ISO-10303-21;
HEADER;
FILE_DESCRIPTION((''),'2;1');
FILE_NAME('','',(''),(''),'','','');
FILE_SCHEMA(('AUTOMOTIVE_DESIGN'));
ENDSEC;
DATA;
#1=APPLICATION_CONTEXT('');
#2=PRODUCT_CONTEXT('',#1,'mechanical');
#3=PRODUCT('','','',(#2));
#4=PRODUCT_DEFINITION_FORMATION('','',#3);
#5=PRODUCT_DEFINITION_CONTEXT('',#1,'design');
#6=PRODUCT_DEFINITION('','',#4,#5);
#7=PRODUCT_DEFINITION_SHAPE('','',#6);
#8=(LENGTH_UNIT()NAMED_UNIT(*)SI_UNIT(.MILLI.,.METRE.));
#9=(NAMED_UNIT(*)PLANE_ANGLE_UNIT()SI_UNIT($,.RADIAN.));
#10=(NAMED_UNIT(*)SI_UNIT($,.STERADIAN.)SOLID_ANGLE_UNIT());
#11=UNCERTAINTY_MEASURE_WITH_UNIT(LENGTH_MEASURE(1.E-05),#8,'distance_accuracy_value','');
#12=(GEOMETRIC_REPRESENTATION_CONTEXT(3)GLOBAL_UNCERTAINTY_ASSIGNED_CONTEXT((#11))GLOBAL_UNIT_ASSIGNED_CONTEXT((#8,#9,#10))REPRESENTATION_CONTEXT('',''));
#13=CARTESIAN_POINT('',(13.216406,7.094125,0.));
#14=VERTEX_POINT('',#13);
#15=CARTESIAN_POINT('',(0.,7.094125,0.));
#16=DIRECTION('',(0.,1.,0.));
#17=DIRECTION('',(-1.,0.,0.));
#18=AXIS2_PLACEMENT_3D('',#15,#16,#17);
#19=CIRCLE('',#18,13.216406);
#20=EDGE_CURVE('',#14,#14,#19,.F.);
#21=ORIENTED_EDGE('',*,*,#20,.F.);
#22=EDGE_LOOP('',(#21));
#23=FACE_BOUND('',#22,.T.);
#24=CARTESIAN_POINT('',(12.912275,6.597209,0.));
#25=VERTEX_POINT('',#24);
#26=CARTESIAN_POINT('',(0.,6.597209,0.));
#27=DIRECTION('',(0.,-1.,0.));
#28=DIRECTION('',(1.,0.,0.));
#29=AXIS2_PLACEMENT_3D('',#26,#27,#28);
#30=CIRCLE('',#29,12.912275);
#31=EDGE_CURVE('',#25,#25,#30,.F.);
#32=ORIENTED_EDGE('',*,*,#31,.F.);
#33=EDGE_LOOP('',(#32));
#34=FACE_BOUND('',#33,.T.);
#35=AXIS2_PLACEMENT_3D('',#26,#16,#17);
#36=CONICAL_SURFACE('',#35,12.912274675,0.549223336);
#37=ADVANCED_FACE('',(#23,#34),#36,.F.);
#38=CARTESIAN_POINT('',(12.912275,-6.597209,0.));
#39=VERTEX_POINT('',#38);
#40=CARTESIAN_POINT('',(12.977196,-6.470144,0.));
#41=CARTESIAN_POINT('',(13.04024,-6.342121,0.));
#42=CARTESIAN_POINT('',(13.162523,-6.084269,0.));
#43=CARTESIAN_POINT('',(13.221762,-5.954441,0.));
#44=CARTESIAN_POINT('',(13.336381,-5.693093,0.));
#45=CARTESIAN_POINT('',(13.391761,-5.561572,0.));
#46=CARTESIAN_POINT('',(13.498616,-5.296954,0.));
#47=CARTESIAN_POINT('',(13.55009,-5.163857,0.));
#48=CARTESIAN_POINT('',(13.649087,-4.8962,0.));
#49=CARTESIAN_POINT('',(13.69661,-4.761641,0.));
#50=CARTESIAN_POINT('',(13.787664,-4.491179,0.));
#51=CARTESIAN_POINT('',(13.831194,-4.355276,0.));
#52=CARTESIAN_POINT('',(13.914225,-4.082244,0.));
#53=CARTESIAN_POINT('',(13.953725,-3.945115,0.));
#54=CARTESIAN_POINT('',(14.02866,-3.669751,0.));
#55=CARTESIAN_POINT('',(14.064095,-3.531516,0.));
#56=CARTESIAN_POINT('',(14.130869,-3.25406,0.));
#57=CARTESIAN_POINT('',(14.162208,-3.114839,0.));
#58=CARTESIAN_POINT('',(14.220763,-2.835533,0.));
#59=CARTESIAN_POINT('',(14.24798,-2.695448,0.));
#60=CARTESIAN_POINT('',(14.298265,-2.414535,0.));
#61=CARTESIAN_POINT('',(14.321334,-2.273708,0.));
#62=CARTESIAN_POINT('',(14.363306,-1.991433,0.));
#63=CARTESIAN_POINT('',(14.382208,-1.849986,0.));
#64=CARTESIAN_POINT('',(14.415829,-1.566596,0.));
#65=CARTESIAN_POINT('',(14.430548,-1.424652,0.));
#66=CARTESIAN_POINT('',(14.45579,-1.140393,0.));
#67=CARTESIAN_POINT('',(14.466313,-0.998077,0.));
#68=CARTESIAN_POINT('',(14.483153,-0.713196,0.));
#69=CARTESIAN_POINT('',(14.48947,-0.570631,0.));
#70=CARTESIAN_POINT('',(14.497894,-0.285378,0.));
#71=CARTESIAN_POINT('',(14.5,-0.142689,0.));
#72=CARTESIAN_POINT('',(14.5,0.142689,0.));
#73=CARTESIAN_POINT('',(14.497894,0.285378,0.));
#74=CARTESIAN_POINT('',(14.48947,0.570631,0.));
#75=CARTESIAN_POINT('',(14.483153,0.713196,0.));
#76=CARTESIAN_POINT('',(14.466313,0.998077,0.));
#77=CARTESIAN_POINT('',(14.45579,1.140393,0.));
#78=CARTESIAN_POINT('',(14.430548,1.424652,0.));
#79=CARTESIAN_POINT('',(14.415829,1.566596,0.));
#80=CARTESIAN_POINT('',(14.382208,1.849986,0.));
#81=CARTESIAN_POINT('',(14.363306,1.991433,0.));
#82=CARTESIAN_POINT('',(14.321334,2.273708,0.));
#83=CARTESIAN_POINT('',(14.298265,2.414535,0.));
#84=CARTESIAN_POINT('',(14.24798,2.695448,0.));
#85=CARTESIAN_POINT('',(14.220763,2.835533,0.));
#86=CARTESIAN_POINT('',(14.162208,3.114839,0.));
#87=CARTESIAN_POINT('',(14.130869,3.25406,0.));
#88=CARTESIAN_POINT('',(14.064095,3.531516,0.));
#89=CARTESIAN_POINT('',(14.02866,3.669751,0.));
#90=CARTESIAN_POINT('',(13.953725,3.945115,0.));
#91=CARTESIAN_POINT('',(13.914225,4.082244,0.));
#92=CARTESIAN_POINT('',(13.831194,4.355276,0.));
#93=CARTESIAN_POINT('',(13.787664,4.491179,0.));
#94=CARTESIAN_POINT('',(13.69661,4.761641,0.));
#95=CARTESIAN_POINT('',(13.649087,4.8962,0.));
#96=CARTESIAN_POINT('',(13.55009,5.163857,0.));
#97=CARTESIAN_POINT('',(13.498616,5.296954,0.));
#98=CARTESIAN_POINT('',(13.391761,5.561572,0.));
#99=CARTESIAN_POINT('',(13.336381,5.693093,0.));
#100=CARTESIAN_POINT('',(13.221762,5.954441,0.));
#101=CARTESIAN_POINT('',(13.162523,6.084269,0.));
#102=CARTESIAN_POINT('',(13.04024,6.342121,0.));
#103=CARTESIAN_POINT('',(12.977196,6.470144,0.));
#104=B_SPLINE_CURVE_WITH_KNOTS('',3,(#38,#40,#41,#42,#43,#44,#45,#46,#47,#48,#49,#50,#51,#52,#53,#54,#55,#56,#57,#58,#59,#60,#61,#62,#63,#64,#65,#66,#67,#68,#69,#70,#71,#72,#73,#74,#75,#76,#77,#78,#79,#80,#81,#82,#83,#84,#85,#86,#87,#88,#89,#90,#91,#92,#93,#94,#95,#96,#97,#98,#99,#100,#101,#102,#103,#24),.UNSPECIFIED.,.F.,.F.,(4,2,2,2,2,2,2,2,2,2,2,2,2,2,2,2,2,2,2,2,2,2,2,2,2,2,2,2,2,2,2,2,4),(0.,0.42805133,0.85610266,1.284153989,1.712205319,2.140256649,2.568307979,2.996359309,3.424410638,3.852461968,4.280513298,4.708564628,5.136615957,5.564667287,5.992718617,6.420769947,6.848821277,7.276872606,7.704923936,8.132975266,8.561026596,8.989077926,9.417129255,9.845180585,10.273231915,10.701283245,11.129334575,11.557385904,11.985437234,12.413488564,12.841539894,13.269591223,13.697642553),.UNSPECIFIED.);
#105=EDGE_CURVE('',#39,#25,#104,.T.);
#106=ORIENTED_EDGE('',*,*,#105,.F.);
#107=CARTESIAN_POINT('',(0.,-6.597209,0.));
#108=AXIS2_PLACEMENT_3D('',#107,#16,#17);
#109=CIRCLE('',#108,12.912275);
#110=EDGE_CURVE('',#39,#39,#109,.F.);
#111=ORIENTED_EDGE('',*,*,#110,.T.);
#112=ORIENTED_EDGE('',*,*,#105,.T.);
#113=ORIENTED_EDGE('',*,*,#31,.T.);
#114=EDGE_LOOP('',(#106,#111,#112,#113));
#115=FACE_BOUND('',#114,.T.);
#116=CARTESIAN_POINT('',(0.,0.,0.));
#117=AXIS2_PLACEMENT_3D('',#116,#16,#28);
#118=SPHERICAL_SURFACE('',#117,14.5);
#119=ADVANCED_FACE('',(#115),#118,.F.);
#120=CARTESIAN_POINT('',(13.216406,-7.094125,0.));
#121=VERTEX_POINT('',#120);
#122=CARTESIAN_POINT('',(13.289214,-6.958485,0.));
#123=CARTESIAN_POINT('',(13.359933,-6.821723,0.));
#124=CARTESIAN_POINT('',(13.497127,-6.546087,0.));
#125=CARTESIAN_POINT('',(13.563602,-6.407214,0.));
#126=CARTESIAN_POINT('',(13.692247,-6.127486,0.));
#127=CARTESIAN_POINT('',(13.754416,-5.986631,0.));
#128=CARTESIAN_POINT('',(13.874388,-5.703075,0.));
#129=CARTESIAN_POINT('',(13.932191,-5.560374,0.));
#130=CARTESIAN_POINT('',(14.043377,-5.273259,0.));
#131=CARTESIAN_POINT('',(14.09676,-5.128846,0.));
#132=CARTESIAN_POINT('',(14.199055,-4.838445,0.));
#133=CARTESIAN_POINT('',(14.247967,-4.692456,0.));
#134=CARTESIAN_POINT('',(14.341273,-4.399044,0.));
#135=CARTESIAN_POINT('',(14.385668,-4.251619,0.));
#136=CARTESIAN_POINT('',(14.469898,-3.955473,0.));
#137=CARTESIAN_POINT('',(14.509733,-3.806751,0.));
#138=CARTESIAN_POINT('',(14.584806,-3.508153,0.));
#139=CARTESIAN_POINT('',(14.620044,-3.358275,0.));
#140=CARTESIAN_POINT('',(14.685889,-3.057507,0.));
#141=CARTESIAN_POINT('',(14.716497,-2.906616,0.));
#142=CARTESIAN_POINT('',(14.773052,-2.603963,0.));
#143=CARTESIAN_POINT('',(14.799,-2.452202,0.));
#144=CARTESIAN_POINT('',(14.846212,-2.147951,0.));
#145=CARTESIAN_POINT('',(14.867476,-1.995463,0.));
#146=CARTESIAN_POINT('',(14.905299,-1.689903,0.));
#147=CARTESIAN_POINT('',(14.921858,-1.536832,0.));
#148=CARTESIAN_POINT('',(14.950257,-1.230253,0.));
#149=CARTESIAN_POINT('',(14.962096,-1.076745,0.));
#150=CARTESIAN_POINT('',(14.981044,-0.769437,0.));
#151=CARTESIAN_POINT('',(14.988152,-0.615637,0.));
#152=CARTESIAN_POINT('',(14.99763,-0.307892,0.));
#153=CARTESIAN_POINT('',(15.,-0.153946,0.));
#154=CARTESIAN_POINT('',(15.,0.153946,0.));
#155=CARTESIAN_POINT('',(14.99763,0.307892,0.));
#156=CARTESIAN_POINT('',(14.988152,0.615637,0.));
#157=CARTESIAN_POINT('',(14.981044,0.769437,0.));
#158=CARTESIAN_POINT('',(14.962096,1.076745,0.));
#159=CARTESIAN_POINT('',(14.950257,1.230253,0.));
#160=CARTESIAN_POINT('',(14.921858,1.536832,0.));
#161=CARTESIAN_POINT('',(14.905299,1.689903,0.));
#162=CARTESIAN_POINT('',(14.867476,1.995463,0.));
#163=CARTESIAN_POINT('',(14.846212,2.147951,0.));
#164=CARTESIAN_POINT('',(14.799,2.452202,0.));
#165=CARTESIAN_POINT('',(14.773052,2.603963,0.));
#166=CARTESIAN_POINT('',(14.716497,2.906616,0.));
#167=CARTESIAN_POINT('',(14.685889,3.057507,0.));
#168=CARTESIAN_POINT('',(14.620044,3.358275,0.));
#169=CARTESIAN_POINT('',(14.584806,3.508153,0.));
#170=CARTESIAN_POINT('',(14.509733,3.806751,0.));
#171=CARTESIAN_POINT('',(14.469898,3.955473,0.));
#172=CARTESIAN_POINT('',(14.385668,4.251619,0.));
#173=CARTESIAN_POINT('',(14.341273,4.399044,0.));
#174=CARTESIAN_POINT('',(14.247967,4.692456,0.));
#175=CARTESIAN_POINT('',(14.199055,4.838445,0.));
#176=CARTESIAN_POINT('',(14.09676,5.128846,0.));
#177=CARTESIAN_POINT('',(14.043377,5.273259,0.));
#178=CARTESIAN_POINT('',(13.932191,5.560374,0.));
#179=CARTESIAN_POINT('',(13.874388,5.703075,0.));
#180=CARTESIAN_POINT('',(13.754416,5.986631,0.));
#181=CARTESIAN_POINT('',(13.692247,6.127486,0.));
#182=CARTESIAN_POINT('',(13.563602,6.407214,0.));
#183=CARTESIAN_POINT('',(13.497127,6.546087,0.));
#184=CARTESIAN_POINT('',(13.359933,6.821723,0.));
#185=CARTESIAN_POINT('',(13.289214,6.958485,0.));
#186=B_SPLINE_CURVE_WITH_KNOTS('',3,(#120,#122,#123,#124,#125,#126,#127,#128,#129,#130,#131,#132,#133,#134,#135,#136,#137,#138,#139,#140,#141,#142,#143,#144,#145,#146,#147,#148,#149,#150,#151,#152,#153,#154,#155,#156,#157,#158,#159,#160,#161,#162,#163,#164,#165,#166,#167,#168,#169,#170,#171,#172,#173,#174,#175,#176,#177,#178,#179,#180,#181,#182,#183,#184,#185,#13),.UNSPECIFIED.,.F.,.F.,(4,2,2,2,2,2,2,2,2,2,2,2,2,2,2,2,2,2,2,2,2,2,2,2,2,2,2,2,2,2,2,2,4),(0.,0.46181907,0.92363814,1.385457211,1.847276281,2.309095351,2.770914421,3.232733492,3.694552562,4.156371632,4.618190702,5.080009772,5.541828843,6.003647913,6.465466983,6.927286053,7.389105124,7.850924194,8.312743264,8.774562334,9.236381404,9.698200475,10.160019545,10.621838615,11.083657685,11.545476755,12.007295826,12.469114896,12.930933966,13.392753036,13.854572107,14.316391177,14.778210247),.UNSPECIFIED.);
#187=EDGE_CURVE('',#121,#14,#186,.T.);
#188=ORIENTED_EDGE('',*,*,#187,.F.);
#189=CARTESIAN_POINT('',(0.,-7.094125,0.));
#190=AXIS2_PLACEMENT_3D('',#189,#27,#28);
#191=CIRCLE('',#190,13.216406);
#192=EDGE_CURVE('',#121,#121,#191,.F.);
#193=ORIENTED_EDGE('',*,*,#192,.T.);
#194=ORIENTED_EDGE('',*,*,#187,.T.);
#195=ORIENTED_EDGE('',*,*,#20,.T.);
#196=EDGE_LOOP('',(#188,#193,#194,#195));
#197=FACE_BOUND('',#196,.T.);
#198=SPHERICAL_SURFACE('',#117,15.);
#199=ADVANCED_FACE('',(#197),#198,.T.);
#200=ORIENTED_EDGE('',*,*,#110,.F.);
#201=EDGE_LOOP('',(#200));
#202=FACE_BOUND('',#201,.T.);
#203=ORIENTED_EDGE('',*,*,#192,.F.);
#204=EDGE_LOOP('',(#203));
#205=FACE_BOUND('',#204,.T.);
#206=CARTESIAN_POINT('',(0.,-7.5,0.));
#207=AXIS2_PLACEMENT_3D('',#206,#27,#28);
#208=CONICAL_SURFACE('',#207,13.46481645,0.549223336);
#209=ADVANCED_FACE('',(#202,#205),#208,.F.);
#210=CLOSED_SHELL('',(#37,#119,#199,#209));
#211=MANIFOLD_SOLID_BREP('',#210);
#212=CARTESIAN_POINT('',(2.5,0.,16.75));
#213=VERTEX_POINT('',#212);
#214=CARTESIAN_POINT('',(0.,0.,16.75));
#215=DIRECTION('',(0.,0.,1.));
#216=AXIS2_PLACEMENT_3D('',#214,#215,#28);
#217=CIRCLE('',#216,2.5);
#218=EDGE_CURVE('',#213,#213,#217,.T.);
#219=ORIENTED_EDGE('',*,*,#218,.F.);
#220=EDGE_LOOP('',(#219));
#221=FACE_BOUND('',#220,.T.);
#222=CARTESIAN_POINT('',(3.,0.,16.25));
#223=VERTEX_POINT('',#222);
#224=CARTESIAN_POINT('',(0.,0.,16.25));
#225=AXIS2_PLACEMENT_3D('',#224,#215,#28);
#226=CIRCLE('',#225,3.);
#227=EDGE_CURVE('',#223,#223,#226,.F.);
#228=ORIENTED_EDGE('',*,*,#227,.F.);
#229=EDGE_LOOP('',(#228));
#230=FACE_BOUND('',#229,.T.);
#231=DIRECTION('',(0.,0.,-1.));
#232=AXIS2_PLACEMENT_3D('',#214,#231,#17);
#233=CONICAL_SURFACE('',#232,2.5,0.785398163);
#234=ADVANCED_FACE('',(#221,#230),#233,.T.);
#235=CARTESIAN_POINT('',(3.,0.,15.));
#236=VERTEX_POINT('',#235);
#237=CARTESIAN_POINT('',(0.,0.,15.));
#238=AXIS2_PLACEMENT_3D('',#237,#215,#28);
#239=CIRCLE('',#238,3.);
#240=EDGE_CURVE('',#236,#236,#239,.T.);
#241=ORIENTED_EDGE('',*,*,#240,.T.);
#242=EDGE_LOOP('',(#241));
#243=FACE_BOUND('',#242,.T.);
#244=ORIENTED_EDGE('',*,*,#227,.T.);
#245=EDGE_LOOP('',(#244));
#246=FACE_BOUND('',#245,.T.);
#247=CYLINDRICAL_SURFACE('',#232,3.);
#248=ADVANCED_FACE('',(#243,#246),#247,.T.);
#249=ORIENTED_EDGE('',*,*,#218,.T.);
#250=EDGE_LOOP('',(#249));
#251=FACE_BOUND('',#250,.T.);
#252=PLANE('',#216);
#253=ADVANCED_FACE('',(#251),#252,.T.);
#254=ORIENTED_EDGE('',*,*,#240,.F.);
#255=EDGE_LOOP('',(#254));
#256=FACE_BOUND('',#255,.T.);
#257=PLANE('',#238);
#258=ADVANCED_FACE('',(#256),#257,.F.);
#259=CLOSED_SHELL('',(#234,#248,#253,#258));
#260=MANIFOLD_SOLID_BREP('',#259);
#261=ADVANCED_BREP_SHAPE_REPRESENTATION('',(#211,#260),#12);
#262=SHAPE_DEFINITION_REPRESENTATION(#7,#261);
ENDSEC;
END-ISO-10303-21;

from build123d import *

# Parameters (mm, degrees)
SHELL2_T            = -0.5
SKETCH4_R           = 3
BOSS_EXTRUDE1_DEPTH = 1.75
CHAMFER5_SIZE       = 0.5


with BuildPart() as part:
    # Sketch2 → Revolve1 (revolve)
    with BuildSketch(Plane.XY):
        with BuildLine():
            Line((12.990381057, 7.5), (0, 7.5))
            Line((0, 7.5), (0, -7.5))
            Line((0, -7.5), (12.990381057, -7.5))
            ThreePointArc((12.990381057, -7.5), (15, 0), (12.990381057, 7.5))
        make_face()
    revolve(axis=Axis((0, 7.5, 0), (0, -1, 0)))

    # Shell2
    shell2_openings = [part.faces().sort_by_distance(p)[0] for p in [
        (0, -7.5, 0),
        (0, 7.5, 0),
    ]]
    offset(amount=SHELL2_T, openings=shell2_openings, kind=Kind.INTERSECTION)

    # Chamfer4
    # the kernel refuses this chamfer: 1.1 mm, written as the material it takes off along each edge
    with BuildSketch(Plane(origin=(0, 7.5, 0), x_dir=(1, 0, 0), z_dir=(0, 0, 1))) as chamfer4_piece_1:
        with BuildLine():
            Line((13.487785547, 0.03752893), (12.889305577, -0.940320222))
            Line((12.889305577, -0.940320222), (12.86971454, -0.95032978))
            ThreePointArc((12.86971454, -0.95032978), (12.65505268, -0.467068486), (12.390845176, -0.01137931))
            Line((12.390845176, -0.01137931), (12.409673646, 0.022))
            ThreePointArc((12.409673646, 0.022), (12.948729597, 0.022), (13.487785547, 0.05952893))
            Line((13.487785547, 0.05952893), (13.487785547, 0.03752893))
        make_face()
    revolve(axis=Axis((0, 7.5, 0), (0, 1, 0)), mode=Mode.SUBTRACT)
    with BuildSketch(Plane(origin=(0, -7.5, 0), x_dir=(1, 0, 0), z_dir=(0, 0, 1))) as chamfer4_piece_2:
        with BuildLine():
            Line((12.889305577, 0.940320222), (13.487785547, -0.03752893))
            Line((13.487785547, -0.03752893), (13.487785547, -0.05952893))
            ThreePointArc((13.487785547, -0.05952893), (12.948729597, -0.022), (12.409673646, -0.022))
            Line((12.409673646, -0.022), (12.390845176, 0.01137931))
            ThreePointArc((12.390845176, 0.01137931), (12.65505268, 0.467068486), (12.86971454, 0.95032978))
            Line((12.86971454, 0.95032978), (12.889305577, 0.940320222))
        make_face()
    revolve(axis=Axis((0, -7.5, 0), (0, 1, 0)), mode=Mode.SUBTRACT)


with BuildPart() as body_2:
    # Sketch4 → Boss-Extrude1 (new body)
    with BuildSketch(Plane.XY.offset(15)):
        Circle(SKETCH4_R)
    extrude(amount=BOSS_EXTRUDE1_DEPTH)

    # Chamfer5
    chamfer5_edges = [body_2.edges().sort_by_distance(p)[0] for p in [
        (-3, 0, 16.75),
    ]]
    chamfer(chamfer5_edges, length=CHAMFER5_SIZE)


solid = Compound([part.part, body_2.part])
